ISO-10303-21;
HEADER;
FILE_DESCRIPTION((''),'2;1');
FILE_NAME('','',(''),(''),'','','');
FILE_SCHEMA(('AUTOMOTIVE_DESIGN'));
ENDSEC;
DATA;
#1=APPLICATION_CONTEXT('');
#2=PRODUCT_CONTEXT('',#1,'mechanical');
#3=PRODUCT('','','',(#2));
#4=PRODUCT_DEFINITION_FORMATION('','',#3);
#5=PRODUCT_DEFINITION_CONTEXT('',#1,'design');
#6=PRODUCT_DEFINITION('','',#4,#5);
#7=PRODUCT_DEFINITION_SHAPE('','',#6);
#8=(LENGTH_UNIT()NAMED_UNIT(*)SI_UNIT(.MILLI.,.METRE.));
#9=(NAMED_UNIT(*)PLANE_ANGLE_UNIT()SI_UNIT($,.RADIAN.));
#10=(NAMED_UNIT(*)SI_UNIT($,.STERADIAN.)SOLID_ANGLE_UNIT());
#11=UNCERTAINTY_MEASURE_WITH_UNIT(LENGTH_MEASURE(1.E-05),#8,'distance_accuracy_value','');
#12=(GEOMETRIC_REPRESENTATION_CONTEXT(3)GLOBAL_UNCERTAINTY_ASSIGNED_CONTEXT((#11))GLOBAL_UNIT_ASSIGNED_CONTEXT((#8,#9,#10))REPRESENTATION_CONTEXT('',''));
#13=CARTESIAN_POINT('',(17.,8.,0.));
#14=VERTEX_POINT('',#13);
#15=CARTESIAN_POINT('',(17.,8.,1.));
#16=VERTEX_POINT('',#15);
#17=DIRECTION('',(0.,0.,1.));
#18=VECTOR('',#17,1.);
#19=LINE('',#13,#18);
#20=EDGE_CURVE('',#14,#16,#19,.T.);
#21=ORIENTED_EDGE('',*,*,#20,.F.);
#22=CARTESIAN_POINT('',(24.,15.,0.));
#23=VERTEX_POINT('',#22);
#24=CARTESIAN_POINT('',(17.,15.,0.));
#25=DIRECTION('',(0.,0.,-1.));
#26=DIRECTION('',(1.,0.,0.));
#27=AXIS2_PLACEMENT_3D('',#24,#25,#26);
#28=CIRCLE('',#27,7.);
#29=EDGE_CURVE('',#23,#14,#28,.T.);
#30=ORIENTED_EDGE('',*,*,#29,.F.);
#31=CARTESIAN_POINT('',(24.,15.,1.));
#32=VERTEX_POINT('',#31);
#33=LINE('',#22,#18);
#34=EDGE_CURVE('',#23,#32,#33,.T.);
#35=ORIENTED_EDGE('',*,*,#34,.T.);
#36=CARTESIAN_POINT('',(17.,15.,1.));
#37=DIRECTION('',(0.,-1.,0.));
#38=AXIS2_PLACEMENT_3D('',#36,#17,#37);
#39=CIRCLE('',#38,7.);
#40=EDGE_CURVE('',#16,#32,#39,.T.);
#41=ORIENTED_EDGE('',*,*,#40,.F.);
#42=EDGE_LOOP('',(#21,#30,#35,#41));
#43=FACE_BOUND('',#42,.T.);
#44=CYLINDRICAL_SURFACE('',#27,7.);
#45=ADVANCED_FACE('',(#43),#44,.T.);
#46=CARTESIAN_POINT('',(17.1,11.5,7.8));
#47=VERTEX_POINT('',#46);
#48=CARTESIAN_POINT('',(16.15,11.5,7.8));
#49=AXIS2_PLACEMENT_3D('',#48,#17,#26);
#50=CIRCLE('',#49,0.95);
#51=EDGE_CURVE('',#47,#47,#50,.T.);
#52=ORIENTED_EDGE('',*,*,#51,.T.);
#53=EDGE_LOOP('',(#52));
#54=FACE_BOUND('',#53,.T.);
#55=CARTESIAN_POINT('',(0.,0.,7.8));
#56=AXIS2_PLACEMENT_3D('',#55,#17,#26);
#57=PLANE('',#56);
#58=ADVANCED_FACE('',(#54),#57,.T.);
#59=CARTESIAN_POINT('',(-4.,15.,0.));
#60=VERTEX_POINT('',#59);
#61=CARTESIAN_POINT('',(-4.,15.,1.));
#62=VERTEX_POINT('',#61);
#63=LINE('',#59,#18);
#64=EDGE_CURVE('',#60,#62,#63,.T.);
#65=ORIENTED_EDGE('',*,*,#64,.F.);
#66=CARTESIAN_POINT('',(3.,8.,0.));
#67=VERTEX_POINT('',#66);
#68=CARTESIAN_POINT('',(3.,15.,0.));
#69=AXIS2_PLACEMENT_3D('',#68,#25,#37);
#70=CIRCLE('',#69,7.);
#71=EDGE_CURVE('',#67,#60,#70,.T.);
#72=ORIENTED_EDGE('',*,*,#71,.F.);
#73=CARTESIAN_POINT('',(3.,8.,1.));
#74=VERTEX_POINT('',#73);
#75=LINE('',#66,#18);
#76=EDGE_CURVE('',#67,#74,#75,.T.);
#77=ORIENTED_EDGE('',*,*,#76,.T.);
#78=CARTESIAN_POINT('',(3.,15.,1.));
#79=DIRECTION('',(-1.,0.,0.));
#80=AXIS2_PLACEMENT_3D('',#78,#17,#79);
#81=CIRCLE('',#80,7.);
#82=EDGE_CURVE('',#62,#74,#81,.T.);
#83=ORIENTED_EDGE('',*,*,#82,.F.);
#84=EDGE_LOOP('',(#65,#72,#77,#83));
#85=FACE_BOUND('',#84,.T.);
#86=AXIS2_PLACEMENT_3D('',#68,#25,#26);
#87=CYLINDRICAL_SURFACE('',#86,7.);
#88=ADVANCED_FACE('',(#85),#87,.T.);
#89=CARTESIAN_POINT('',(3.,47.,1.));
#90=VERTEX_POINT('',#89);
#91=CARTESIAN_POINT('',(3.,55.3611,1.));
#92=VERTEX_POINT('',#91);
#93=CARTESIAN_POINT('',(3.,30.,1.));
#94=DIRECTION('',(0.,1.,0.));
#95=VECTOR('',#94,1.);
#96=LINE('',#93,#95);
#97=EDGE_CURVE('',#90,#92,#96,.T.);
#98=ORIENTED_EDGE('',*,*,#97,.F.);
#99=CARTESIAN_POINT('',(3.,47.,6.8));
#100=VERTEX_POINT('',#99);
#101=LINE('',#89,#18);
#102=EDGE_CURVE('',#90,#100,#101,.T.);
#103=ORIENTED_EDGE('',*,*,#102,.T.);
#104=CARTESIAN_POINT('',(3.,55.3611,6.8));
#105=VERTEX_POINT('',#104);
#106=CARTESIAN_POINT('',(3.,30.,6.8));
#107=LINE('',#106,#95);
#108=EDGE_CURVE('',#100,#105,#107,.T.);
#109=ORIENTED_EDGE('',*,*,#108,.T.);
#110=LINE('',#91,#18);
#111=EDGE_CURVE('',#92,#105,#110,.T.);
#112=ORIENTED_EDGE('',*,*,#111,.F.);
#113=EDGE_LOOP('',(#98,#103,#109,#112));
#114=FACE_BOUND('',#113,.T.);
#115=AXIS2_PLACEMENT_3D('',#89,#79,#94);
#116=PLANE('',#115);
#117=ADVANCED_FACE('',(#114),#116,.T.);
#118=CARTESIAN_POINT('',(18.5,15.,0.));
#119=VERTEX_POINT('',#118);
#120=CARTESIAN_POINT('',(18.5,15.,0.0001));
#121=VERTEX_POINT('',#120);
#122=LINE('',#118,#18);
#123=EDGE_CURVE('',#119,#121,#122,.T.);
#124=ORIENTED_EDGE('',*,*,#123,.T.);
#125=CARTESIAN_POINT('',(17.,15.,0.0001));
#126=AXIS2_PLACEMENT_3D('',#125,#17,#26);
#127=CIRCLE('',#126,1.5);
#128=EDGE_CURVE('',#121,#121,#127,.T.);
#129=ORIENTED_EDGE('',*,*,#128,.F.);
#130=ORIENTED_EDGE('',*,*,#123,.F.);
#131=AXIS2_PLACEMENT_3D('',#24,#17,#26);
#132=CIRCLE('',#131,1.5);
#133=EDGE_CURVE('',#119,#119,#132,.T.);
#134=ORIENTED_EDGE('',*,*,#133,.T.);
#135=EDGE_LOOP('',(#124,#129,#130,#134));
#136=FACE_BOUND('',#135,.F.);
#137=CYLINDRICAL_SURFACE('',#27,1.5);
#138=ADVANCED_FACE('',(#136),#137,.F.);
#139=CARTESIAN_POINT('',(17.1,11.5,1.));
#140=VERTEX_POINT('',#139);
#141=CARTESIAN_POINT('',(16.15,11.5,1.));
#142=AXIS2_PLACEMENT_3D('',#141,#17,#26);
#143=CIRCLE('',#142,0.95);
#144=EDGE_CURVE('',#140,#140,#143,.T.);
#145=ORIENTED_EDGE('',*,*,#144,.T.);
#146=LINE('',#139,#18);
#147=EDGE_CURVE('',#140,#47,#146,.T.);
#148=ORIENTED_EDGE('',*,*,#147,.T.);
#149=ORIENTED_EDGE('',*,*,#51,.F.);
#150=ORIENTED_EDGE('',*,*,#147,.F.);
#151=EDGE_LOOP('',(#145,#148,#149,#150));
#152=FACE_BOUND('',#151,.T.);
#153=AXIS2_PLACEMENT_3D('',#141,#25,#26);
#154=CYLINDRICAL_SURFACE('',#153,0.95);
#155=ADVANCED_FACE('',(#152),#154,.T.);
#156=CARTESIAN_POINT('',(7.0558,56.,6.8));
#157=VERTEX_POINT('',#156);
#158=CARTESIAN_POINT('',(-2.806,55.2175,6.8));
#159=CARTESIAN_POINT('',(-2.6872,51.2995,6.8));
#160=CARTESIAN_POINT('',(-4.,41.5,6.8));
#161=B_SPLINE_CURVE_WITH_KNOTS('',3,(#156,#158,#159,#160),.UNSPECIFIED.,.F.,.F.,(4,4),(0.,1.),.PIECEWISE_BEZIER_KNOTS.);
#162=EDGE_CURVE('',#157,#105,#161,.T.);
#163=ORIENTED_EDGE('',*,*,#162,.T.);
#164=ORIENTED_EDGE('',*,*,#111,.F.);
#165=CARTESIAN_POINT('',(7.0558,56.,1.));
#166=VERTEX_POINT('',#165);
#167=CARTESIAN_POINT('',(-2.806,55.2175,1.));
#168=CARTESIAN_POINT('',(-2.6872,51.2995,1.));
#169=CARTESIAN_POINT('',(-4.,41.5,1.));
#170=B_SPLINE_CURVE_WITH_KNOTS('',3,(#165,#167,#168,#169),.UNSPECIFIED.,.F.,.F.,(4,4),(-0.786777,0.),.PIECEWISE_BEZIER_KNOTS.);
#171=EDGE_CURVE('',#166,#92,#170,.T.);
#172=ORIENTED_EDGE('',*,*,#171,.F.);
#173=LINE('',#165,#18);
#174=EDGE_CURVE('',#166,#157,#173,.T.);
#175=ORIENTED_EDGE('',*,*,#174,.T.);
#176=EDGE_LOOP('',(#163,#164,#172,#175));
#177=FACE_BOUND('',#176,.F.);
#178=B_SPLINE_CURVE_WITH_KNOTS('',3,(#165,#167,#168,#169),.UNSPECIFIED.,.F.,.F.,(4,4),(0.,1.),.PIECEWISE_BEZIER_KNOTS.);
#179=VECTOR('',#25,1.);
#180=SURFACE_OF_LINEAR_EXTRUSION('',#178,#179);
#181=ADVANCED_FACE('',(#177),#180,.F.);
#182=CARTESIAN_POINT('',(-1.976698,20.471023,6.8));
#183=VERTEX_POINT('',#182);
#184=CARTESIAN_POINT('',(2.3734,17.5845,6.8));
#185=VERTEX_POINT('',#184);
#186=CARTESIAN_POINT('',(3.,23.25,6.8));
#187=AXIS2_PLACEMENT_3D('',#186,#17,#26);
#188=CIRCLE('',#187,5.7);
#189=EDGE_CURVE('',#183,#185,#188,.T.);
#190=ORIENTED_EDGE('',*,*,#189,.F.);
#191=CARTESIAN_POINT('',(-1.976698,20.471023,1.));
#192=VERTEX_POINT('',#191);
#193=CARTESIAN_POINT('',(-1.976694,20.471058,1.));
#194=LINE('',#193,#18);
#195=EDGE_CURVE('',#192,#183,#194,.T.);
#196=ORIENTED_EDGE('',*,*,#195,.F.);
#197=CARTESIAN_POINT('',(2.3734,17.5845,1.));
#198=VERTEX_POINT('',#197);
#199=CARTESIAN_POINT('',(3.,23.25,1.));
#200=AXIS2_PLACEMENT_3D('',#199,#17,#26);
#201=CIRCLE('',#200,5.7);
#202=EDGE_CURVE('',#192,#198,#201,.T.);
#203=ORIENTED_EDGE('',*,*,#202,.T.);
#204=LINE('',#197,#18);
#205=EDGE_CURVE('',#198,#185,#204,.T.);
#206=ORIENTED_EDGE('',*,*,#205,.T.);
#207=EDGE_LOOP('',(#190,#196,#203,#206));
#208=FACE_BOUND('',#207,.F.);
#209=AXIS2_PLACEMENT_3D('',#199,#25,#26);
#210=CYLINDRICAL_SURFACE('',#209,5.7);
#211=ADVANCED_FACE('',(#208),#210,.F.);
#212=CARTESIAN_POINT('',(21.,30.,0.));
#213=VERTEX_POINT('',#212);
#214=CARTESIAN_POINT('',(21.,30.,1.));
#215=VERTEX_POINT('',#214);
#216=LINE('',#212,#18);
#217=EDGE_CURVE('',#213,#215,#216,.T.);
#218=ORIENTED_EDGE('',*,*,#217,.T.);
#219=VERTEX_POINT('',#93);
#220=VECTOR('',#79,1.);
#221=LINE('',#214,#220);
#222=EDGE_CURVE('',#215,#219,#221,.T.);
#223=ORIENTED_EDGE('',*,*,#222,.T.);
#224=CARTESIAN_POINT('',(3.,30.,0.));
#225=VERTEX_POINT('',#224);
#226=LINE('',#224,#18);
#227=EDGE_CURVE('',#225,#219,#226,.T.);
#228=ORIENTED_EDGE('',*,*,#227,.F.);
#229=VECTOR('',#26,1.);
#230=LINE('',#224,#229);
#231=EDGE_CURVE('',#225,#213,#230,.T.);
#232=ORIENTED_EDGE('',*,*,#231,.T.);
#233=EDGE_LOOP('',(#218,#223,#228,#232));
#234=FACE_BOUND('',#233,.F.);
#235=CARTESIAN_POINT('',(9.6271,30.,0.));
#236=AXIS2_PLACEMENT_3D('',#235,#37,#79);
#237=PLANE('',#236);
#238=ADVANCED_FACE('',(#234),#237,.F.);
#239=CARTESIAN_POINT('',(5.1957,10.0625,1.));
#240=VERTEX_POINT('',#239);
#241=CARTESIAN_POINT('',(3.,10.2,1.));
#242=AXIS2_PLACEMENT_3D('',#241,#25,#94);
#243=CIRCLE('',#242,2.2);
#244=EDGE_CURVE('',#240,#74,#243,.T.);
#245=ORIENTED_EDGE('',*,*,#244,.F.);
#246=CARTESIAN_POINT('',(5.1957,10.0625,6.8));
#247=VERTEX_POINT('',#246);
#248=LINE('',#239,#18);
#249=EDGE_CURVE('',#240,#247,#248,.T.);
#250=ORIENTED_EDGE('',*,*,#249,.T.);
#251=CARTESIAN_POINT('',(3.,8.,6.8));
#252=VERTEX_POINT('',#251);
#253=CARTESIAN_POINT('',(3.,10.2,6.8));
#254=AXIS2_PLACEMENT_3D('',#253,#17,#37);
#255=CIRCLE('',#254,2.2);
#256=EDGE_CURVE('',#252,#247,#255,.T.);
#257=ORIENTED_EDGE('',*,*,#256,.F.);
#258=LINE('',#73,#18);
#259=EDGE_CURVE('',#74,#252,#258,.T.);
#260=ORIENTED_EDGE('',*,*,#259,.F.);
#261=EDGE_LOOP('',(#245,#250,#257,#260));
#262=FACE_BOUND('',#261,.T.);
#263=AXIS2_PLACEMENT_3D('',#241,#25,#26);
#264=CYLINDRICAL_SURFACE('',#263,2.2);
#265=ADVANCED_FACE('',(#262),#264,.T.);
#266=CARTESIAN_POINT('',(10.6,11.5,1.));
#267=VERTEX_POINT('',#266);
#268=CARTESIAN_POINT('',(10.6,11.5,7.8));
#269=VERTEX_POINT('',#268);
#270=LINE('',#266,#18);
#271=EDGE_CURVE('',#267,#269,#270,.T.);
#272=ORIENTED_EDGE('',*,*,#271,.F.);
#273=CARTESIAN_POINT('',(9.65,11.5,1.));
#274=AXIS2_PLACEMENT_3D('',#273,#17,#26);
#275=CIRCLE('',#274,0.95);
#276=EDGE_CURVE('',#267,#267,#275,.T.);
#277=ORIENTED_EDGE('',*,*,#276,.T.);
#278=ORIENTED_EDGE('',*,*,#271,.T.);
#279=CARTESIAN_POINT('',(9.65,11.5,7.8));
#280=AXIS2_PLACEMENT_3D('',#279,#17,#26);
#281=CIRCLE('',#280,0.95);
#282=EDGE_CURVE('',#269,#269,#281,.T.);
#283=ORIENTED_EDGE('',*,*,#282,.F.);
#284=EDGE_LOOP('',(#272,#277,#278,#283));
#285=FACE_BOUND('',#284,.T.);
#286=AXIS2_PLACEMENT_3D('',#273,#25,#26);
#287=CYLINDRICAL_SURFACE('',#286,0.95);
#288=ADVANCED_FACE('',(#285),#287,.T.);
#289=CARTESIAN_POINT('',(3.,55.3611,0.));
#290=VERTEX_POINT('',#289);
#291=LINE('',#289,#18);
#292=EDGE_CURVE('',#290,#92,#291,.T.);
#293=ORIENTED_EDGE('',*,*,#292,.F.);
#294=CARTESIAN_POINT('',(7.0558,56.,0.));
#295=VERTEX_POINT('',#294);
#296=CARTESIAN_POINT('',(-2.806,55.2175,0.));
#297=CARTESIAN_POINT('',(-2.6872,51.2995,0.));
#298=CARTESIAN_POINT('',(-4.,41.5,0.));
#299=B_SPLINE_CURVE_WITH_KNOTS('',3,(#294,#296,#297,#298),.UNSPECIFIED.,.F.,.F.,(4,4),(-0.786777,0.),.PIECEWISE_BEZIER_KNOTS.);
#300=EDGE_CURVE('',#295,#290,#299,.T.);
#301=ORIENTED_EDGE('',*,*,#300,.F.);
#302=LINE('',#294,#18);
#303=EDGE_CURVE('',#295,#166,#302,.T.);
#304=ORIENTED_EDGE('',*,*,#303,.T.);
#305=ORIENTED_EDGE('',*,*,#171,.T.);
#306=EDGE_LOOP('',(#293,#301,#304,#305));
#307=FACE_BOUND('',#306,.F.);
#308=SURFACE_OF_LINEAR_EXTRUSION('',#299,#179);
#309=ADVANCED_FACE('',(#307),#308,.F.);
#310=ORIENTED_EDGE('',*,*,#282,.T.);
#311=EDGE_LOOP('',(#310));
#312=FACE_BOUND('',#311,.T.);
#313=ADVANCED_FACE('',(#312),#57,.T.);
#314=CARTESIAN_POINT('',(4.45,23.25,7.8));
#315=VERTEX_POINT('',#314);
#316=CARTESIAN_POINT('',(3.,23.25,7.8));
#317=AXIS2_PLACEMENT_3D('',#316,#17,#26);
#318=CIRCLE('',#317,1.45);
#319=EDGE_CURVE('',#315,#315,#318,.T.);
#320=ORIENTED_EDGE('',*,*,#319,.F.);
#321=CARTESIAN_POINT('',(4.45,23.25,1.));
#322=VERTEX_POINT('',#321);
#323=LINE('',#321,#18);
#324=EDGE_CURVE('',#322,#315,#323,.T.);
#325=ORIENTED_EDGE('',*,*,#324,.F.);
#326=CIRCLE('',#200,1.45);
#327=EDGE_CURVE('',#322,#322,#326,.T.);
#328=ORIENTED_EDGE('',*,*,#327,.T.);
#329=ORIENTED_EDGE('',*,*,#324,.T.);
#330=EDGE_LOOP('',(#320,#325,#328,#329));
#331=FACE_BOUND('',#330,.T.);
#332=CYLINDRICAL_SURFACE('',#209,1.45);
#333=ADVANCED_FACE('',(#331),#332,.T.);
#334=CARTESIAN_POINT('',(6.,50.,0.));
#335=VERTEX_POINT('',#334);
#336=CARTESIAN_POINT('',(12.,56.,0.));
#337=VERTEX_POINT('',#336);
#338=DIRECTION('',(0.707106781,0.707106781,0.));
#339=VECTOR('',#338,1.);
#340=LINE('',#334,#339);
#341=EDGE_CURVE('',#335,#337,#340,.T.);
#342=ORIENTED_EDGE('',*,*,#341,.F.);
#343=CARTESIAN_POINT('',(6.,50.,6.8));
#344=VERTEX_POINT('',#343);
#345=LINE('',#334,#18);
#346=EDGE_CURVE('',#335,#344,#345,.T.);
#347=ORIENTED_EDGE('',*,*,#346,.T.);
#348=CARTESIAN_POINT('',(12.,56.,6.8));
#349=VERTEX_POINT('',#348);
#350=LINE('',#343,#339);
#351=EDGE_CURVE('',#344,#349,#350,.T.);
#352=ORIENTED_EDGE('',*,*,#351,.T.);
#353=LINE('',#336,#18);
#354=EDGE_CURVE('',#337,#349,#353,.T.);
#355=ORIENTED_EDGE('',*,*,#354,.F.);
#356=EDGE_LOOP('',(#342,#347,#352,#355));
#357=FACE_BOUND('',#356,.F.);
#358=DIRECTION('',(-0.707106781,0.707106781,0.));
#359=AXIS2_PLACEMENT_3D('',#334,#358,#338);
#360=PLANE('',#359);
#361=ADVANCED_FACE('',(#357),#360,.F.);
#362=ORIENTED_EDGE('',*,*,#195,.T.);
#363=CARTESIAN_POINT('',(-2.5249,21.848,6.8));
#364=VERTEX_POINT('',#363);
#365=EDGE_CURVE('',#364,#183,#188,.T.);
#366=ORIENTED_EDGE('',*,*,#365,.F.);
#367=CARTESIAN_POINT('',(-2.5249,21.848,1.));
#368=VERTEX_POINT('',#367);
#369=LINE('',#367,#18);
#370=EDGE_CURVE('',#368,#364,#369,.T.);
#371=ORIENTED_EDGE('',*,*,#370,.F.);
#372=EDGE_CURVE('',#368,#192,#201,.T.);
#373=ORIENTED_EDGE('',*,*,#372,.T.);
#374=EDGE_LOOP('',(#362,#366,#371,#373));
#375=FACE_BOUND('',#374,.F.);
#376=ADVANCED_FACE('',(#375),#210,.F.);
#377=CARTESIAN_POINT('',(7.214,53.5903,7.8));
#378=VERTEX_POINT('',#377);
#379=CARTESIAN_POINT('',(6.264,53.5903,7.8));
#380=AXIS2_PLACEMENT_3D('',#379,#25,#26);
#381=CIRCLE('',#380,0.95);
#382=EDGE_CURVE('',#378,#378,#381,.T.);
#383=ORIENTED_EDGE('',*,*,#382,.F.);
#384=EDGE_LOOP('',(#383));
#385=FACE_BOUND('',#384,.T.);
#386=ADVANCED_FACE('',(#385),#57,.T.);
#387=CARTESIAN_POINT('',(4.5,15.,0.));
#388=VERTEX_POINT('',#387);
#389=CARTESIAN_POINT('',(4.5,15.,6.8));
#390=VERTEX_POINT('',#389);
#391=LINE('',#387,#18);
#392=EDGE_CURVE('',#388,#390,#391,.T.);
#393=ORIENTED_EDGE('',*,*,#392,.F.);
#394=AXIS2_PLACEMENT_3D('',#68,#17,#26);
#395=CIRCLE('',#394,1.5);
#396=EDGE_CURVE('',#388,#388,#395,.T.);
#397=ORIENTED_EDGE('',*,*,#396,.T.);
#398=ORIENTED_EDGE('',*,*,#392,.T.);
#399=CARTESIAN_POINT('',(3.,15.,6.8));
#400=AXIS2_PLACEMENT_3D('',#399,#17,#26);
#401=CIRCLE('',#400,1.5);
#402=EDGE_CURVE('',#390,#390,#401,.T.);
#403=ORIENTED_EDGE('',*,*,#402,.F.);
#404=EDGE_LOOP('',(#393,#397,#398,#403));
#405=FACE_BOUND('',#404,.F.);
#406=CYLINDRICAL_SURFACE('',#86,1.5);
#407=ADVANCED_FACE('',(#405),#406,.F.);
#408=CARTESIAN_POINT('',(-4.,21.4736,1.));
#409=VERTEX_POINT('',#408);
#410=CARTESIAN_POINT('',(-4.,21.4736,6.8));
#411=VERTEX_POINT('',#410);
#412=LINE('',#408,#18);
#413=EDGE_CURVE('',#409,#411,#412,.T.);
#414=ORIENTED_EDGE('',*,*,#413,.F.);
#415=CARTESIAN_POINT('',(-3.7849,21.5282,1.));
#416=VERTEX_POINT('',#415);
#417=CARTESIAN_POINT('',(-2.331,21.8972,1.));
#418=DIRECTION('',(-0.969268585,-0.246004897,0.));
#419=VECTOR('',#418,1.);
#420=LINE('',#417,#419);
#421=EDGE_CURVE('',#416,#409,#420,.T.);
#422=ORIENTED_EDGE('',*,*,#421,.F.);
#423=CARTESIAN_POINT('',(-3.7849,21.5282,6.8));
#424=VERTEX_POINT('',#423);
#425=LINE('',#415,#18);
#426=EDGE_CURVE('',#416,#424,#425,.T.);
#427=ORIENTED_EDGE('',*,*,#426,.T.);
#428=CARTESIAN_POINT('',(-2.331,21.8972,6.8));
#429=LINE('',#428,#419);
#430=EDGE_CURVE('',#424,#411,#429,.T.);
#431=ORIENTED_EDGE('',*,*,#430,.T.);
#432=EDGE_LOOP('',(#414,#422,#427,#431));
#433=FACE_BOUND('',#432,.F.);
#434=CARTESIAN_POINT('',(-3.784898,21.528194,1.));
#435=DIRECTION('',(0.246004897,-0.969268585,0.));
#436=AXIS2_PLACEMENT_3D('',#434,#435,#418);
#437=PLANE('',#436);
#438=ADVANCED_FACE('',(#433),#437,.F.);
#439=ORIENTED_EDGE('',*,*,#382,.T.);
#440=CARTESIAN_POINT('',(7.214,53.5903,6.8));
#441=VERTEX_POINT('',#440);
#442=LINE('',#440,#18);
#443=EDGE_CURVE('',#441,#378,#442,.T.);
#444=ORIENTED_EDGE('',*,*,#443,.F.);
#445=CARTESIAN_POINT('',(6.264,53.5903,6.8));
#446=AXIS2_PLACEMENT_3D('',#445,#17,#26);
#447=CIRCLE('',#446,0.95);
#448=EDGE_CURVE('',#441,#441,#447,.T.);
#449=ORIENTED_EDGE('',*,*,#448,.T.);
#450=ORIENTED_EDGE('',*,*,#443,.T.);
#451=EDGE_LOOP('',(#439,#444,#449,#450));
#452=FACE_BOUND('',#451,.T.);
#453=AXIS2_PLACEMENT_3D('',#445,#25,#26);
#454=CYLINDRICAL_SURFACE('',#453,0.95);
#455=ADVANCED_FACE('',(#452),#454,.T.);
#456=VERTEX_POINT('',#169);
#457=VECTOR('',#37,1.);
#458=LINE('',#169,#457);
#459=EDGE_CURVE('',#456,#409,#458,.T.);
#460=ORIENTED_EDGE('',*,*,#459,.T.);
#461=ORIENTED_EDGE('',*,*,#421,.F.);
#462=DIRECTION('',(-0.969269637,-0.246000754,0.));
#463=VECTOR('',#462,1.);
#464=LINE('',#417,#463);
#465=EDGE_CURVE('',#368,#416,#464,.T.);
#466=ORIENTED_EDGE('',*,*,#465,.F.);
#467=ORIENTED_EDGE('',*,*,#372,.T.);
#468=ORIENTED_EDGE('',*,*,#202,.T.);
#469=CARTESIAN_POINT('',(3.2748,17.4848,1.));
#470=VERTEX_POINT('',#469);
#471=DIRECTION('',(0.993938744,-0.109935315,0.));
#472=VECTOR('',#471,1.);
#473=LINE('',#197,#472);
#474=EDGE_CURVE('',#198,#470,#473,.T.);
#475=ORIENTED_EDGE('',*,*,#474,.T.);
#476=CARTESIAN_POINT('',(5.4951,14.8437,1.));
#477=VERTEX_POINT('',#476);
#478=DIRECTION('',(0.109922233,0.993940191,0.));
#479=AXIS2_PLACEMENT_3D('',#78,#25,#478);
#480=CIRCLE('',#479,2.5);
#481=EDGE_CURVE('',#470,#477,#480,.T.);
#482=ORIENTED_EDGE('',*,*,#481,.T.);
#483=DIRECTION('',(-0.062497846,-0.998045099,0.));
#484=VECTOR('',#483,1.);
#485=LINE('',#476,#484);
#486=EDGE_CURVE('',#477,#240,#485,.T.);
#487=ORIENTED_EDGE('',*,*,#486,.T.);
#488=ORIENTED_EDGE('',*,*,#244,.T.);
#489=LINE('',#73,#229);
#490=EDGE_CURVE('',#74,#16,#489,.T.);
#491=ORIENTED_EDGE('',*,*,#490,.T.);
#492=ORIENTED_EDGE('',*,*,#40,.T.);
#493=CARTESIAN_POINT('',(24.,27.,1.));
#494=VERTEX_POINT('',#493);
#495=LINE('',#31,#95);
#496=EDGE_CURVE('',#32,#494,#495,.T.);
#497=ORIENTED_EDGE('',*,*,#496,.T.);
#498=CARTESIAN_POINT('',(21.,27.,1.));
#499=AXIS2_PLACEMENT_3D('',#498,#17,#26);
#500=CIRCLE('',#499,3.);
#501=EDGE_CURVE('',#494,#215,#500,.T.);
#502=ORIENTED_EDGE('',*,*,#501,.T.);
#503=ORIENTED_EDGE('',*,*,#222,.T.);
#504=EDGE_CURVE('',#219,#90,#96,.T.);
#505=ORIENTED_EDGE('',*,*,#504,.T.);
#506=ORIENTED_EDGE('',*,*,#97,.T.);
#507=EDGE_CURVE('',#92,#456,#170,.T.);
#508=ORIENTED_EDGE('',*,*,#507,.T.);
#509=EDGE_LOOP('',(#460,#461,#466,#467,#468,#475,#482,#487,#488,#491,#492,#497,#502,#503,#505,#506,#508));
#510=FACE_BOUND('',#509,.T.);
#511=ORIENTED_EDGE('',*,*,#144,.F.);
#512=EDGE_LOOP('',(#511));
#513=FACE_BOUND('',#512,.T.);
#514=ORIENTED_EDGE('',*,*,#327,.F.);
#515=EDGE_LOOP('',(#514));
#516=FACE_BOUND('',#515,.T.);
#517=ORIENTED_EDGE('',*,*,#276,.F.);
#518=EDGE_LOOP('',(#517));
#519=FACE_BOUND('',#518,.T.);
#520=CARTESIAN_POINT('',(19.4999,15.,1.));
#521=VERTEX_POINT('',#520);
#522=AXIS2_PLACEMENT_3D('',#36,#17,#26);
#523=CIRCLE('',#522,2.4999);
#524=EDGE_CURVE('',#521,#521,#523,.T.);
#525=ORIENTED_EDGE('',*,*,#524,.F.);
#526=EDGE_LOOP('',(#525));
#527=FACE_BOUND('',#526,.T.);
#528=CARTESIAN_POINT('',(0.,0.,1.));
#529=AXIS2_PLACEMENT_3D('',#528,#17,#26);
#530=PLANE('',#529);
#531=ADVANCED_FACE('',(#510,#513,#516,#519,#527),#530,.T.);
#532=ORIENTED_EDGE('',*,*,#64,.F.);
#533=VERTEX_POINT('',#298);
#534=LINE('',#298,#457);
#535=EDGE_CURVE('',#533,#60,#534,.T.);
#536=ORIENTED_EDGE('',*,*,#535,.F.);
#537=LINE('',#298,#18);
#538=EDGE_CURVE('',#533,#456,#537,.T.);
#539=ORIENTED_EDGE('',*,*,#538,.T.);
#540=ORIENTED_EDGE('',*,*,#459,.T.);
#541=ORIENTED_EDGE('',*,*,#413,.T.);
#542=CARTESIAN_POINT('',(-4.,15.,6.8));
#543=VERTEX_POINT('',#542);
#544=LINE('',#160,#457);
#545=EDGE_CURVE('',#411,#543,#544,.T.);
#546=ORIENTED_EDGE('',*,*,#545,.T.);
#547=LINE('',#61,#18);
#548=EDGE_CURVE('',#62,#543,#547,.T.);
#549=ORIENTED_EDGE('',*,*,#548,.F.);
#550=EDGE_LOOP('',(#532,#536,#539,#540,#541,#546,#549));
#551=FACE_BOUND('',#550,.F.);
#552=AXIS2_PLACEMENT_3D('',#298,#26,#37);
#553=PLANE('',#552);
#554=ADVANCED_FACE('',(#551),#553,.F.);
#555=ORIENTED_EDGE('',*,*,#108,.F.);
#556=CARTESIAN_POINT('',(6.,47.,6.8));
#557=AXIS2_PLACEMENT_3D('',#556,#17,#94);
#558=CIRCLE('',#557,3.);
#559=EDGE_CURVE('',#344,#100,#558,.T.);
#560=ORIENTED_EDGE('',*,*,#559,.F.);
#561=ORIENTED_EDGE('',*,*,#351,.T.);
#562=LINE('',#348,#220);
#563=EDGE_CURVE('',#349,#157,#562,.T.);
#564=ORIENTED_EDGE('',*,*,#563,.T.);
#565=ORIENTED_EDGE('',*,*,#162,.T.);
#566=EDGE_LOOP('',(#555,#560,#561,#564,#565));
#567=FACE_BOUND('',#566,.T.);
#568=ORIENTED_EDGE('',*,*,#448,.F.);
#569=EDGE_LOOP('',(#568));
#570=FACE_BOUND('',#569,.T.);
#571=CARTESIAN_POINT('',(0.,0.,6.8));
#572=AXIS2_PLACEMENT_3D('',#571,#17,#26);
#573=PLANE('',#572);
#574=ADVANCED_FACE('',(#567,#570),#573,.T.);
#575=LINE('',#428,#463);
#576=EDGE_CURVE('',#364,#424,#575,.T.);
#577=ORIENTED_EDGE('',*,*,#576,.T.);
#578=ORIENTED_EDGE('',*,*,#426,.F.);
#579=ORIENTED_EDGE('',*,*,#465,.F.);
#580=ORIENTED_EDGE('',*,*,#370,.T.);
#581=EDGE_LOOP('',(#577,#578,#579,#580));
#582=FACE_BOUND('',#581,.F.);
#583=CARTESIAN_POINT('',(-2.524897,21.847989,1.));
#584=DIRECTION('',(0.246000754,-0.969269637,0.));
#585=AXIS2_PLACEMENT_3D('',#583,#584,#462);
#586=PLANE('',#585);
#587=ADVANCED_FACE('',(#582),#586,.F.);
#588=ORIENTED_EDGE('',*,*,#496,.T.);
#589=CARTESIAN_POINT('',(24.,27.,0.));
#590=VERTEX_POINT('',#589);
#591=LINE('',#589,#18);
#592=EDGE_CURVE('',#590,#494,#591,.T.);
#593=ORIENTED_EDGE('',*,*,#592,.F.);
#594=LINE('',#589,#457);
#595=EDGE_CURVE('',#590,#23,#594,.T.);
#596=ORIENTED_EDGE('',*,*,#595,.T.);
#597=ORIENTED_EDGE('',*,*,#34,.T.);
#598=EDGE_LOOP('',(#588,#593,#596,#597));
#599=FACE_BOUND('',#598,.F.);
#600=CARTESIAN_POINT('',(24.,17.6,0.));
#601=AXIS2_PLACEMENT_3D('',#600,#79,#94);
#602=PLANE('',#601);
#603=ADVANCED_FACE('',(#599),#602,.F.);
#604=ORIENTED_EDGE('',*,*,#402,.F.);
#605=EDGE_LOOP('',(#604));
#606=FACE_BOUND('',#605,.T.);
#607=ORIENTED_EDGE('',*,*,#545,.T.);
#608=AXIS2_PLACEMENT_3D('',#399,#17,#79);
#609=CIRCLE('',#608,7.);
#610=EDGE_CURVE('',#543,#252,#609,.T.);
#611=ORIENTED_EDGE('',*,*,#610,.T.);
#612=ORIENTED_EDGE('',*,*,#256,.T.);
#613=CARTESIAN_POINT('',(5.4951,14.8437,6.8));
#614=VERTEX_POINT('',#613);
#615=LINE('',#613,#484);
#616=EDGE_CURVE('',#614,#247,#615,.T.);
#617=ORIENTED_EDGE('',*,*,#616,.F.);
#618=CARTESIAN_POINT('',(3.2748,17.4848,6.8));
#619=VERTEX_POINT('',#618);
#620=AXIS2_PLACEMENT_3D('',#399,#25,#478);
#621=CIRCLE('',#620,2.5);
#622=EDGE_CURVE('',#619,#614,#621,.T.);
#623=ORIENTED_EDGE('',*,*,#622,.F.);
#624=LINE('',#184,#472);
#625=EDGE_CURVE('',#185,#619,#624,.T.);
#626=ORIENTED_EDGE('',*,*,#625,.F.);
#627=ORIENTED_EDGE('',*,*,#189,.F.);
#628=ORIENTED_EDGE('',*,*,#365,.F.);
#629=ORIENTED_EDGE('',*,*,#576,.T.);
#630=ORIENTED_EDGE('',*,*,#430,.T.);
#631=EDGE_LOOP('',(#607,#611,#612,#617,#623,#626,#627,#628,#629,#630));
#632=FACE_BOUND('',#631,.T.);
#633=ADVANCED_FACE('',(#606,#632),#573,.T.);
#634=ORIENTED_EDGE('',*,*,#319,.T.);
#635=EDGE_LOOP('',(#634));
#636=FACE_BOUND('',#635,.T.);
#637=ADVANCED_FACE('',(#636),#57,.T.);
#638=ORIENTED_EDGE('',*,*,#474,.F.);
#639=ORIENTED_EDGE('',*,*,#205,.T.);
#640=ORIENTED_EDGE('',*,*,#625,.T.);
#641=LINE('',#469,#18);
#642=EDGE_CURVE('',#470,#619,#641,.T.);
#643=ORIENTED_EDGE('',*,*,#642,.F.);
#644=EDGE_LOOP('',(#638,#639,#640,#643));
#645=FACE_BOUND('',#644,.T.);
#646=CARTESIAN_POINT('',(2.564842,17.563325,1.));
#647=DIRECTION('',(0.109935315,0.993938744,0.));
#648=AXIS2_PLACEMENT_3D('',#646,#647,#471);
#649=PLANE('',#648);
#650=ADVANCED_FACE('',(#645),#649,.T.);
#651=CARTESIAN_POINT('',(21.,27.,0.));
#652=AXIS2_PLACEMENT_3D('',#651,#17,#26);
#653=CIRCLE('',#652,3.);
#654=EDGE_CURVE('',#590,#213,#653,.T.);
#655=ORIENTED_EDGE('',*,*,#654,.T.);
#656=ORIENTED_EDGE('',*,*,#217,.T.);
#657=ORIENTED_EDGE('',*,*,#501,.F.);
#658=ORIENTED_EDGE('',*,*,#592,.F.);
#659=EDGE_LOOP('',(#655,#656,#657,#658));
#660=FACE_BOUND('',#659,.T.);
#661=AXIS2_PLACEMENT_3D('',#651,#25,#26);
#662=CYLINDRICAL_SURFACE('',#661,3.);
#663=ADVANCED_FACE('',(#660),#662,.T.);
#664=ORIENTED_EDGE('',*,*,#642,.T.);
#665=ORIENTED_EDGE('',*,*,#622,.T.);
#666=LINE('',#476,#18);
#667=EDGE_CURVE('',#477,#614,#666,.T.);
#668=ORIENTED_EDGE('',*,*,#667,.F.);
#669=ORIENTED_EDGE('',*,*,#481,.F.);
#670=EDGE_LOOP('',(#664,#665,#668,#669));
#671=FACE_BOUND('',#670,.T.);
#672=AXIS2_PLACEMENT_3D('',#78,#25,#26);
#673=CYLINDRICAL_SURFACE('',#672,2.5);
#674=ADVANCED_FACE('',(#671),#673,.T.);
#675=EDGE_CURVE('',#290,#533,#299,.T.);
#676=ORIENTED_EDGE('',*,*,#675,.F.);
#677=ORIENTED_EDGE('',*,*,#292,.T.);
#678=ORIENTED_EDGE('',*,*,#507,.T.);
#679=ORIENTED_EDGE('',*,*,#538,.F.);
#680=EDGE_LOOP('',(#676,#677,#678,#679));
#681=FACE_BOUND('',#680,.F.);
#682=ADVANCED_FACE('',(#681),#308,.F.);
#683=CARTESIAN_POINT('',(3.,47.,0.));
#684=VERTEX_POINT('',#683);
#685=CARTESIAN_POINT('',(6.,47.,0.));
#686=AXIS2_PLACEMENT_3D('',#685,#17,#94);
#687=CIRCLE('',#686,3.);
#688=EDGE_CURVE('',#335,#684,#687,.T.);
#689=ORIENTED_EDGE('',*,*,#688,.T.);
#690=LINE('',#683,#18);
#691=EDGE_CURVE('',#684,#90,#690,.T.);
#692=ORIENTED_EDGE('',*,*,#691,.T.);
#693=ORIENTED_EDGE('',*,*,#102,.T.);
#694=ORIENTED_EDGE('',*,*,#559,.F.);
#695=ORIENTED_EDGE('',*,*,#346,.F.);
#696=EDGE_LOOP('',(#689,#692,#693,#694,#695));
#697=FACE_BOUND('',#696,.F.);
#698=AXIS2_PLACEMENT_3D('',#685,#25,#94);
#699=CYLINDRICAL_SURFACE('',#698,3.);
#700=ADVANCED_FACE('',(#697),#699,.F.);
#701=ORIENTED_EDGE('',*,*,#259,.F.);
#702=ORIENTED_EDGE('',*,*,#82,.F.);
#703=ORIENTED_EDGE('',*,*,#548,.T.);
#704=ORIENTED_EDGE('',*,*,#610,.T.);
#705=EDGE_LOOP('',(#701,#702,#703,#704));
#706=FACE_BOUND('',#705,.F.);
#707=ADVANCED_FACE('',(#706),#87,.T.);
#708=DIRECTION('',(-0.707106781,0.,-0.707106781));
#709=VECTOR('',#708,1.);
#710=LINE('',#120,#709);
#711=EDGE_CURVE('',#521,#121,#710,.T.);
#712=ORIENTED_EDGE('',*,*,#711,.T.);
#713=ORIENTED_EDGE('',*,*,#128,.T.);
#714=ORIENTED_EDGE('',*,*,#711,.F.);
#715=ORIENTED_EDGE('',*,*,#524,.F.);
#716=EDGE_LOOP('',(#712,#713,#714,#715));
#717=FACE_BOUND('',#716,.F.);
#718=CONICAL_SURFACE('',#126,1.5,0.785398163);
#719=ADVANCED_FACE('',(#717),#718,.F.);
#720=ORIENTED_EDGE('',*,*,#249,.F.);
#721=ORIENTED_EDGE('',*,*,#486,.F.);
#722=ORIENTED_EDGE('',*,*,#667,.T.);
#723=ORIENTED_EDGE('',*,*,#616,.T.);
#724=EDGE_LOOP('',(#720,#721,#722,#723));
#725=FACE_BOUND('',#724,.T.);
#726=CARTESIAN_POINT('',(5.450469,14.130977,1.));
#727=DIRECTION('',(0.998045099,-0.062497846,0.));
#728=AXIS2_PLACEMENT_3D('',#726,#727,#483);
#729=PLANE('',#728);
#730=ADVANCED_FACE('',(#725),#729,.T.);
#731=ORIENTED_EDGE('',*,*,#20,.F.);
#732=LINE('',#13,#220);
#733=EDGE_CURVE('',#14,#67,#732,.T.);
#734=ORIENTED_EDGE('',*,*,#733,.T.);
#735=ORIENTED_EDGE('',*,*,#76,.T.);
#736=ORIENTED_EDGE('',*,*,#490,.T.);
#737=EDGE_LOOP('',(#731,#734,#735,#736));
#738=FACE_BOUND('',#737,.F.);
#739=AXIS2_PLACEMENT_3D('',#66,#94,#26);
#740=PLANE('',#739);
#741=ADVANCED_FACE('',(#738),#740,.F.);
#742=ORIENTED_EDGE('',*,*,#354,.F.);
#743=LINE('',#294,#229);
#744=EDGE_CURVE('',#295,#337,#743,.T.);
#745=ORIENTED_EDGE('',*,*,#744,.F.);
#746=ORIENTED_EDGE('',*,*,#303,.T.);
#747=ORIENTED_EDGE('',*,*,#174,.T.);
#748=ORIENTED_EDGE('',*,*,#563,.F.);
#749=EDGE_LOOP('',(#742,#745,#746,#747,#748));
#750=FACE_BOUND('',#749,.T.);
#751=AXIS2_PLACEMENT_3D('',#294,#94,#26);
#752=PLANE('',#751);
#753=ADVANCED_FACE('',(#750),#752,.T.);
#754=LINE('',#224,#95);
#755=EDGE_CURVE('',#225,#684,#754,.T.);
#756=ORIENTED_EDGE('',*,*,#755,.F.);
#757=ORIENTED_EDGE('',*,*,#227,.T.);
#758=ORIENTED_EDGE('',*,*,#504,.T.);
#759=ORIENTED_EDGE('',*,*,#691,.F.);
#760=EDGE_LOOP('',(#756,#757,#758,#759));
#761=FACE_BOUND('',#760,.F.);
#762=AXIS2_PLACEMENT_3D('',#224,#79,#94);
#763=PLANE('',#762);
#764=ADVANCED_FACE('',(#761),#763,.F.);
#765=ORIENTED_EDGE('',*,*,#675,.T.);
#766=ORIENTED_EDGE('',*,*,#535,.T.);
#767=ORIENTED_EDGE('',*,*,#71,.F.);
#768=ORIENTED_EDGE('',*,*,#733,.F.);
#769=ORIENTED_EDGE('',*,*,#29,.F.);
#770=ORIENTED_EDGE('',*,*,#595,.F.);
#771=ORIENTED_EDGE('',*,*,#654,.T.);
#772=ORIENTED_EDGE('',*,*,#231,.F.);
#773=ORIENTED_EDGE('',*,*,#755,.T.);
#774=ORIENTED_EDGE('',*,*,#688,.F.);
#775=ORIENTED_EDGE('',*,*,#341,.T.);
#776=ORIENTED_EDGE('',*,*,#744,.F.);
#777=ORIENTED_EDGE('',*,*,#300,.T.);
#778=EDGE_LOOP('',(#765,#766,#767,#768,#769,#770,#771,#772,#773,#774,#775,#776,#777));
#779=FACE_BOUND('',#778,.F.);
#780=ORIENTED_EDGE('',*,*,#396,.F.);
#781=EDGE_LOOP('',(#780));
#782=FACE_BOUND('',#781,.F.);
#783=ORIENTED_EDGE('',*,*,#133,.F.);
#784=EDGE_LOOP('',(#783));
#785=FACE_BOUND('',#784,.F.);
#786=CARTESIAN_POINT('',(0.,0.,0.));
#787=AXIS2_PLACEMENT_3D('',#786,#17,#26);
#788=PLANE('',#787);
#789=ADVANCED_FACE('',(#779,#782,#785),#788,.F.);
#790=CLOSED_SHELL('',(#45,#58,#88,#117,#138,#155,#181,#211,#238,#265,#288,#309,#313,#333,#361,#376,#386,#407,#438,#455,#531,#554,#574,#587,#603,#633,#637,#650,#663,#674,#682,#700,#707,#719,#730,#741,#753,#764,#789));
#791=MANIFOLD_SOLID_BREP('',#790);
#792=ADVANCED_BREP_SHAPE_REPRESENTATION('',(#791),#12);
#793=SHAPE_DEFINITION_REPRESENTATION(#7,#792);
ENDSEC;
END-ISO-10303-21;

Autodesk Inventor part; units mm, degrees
sketch "Эскиз1" plane through (0, 0, 0) normal (0, 0, 1) x (1, 0, 0)
  line L0 (177.53, 10) -> (177.53, -9.022) projected
  line L1 (177.53, -9.022) -> (165.53, -9.022) projected
  line L2 (165.53, -9.022) -> (165.53, 10) projected
  line L3 (165.53, 10) -> (177.53, 10) projected
  line L4 (165.53, -76) -> (165.53, -56.978) projected
  line L5 (165.53, -56.978) -> (177.53, -56.978) projected
  line L6 (177.53, -56.978) -> (177.53, -76) projected
  line L7 (177.53, -76) -> (165.53, -76) projected
  circle A0 centre (170.53, -49.23) radius 1.6 projected
  circle A1 centre (170.53, -16.77) radius 1.6 projected
  line L8 (181.53, -107.5) -> (181.53, 41.5) projected
  spline S0 degree 3 poles (170.4742, 56) (180.336, 55.2175) (180.2172, 51.2995) (181.53, 41.5) knots -0.786777 -0.786777 -0.786777 -0.786777 0 0 0 0 projected
  line L9 (7.0558, 56) -> (170.4742, 56) projected
  spline S1 degree 3 poles (7.0558, 56) (-2.806, 55.2175) (-2.6872, 51.2995) (-4, 41.5) knots -0.786777 -0.786777 -0.786777 -0.786777 0 0 0 0 projected
  line L10 (-4, 41.5) -> (-4, -107.5) projected
  spline S2 degree 3 poles (7.0558, -122) (-2.806, -121.2175) (-2.6872, -117.2995) (-4, -107.5) knots -0.786777 -0.786777 -0.786777 -0.786777 0 0 0 0 projected
  line L11 (170.4742, -122) -> (7.0558, -122) projected
  spline S3 degree 3 poles (170.4742, -122) (180.336, -121.2175) (180.2172, -117.2995) (181.53, -107.5) knots -0.786777 -0.786777 -0.786777 -0.786777 0 0 0 0 projected
  arc A2 (153.53, -93) -> (156.53, -96) centre (156.53, -93) ccw projected
  line L12 (156.53, -96) -> (174.53, -96) projected
  line L13 (174.53, -96) -> (174.53, -113) projected
  arc A3 (171.53, -116) -> (174.53, -113) centre (171.53, -113) ccw projected
  line L14 (171.53, -116) -> (6, -116) projected
  arc A4 (3, -113) -> (6, -116) centre (6, -113) ccw projected
  line L15 (3, -113) -> (3, -96) projected
  line L16 (3, -96) -> (21, -96) projected
  arc A5 (21, -96) -> (24, -93) centre (21, -93) ccw projected
  line L17 (24, -93) -> (24, 27) projected
  arc A6 (24, 27) -> (21, 30) centre (21, 27) ccw projected
  line L18 (21, 30) -> (3, 30) projected
  line L19 (3, 30) -> (3, 47) projected
  arc A7 (6, 50) -> (3, 47) centre (6, 47) ccw projected
  line L20 (6, 50) -> (171.53, 50) projected
  arc A8 (174.53, 47) -> (171.53, 50) centre (171.53, 47) ccw projected
  line L21 (174.53, 30) -> (174.53, 47) projected
  line L22 (174.53, 30) -> (156.53, 30) projected
  arc A9 (156.53, 30) -> (153.53, 27) centre (156.53, 27) ccw projected
  line L23 (153.53, 27) -> (153.53, -93) projected
  circle A10 centre (160.53, -81) radius 1.5 projected
  circle A11 centre (17, -81) radius 1.5 projected
  circle A12 centre (17, -51) radius 1.5 projected
  circle A13 centre (160.53, -51) radius 1.5 projected
  circle A14 centre (3, -81) radius 1.5 projected
  circle A15 centre (3, -51) radius 1.5 projected
  circle A16 centre (174.53, -81) radius 1.5 projected
  circle A17 centre (17, 15) radius 1.5 projected
  circle A18 centre (17, -15) radius 1.5 projected
  circle A19 centre (160.53, -15) radius 1.5 projected
  circle A20 centre (160.53, 15) radius 1.5 projected
  circle A21 centre (3, 15) radius 1.5 projected
  circle A22 centre (174.53, 15) radius 1.5 projected
  circle A23 centre (3, -15) radius 1.5 projected
  arc A24 (56.8183, -29.5099) -> (58.485, -27.5378) centre (56.485, -27.5378) ccw projected
  line L24 (58.485, -27.5378) -> (58.485, 14) projected
  arc A25 (61.485, 17) -> (58.485, 14) centre (61.485, 14) ccw projected
  line L25 (61.485, 17) -> (61.97, 17) projected
  arc A26 (61.97, 17) -> (64.97, 20) centre (61.97, 20) ccw projected
  line L26 (64.97, 27) -> (64.97, 20) projected
  arc A27 (64.97, 27) -> (61.97, 30) centre (61.97, 27) ccw projected
  line L27 (9.6271, 30) -> (61.97, 30) projected
  arc A28 (9.6271, 30) -> (-1.03, 20.7602) centre (9.8286, 19.0018) ccw projected
  line L28 (-1.03, 20.7602) -> (-1.03, 11.499) projected
  arc A29 (-1.03, 11.499) -> (0.1129, 8.6996) centre (2.97, 11.499) ccw projected
  arc A30 (0.97, 6.6) -> (0.1129, 8.6996) centre (-2.03, 6.6) ccw projected
  line L29 (0.97, 6.6) -> (0.97, -72.6) projected
  arc A31 (0.1129, -74.6996) -> (0.97, -72.6) centre (-2.03, -72.6) ccw projected
  arc A32 (0.1129, -74.6996) -> (-1.03, -77.499) centre (2.97, -77.499) ccw projected
  line L30 (-1.03, -77.499) -> (-1.03, -86.7602) projected
  arc A33 (-1.03, -86.7602) -> (9.6271, -96) centre (9.8286, -85.0018) ccw projected
  line L31 (61.97, -96) -> (9.6271, -96) projected
  arc A34 (61.97, -96) -> (64.97, -93) centre (61.97, -93) ccw projected
  line L32 (64.97, -86) -> (64.97, -93) projected
  arc A35 (64.97, -86) -> (61.97, -83) centre (61.97, -86) ccw projected
  line L33 (61.97, -83) -> (61.485, -83) projected
  arc A36 (58.485, -80) -> (61.485, -83) centre (61.485, -80) ccw projected
  line L34 (58.485, -80) -> (58.485, -48.5022) projected
  arc A37 (58.485, -48.5022) -> (56.8183, -46.5301) centre (56.485, -48.5022) ccw projected
  arc A38 (53.485, -45.3303) -> (56.8183, -46.5301) centre (58.485, -36.67) ccw projected
  arc A39 (52.485, -43.5982) -> (53.485, -45.3303) centre (54.485, -43.5982) ccw projected
  line L35 (52.485, -43.5982) -> (52.485, -32.4418) projected
  arc A40 (53.485, -30.7097) -> (52.485, -32.4418) centre (54.485, -32.4418) ccw projected
  arc A41 (56.8183, -29.5099) -> (53.485, -30.7097) centre (58.485, -39.37) ccw projected
  circle A42 centre (3, -81) radius 1.5 projected
  circle A43 centre (3, 15) radius 1.5 projected
  circle A44 centre (58.485, -89.515) radius 1.5 projected
  circle A45 centre (17, -51) radius 1.5 projected
  circle A46 centre (17, -15) radius 1.5 projected
  circle A47 centre (58.485, 23.515) radius 1.5 projected
  circle A48 centre (49.485, 22.73) radius 0.325 projected
  circle A49 centre (48.885, -25.77) radius 0.8 projected
  circle A50 centre (49.385, -32.52) radius 0.5 projected
  circle A51 centre (4.27, -36.27) radius 0.325 projected
  circle A52 centre (28.2, -73.38) radius 0.325 projected
  circle A53 centre (12.77, 15) radius 0.325 projected
  circle A54 centre (55.185, -49.79) radius 0.325 projected
  circle A55 centre (55.185, -4.51) radius 0.325 projected
  circle A56 centre (12.77, 22) radius 0.325 projected
  circle A57 centre (12.77, -88) radius 0.325 projected
  circle A58 centre (4.27, -23.42) radius 0.325 projected
  circle A59 centre (39.385, -40.52) radius 0.85 projected
  circle A60 centre (53.885, -25.77) radius 0.8 projected
  circle A61 centre (8.77, -88) radius 0.325 projected
  circle A62 centre (39.385, -35.52) radius 0.85 projected
  circle A63 centre (28.2, -60.76) radius 0.325 projected
  circle A64 centre (4.27, -47) radius 0.325 projected
  circle A65 centre (45.215, -90) radius 0.325 projected
  circle A66 centre (43.485, 24.73) radius 0.5 projected
  circle A67 centre (55.185, -69.03) radius 0.325 projected
  circle A68 centre (55.185, 15.73) radius 0.325 projected
  circle A69 centre (45.215, -83) radius 0.325 projected
  circle A70 centre (12.77, -81) radius 0.325 projected
  circle A71 centre (4.27, -8.84) radius 0.325 projected
  circle A72 centre (49.385, -43.52) radius 0.5 projected
  circle A73 centre (8.77, 22) radius 0.325 projected
  line L36 (6, 50) -> (12, 56)
  line L37 (3, 47) -> (3, 55.3611)
  circle A74 centre (3, 15) radius 7
  circle A75 centre (17, 15) radius 7
  line L38 (3, 8) -> (17, 8)
  circle A76 centre (3, 15) radius 2.6
  line L39 (3, 17.6) -> (24, 17.6)
  line L40 (5.6, 15) -> (7.6, 15)
  line L41 (7.6, 15) -> (7.6, 17.6)
  line L42 (7.6, 15) -> (7.6, 8)
  line L43 (7.6, 17.6) -> (20.4, 17.6)
  line L44 (20.4, 17.6) -> (20.4, 7.6)
  line L45 (20.4, 7.6) -> (7.6, 7.6)
  line L46 (7.6, 7.6) -> (7.6, 17.6)
  point P0 (0, 0)
  point P1 (23.4992, 17.6)
  point P2 (-4, 15)
  point P3 (10.5008, 17.6)
  point P4 (10, 15)
  point P5 (9.4992, 17.6)
  point P6 (24, 15)
  dimension "d8" = 5.2
  dimension "d15" = 2
  dimension "d16" = 12.8
  dimension "d17" = 10
extrude "Выдавливание1" add sketch "Эскиз1" along normal blind 1 contours L36 A7 L37 S1 L9 | L10 S1 L37 L19 L18 A28 L28 A74 | A74 L28 A29 A30 | A74 L39 A76 L40 L42 A30 A29 L28 | L28 A28 L18 A6 L17 L39 A75 A74 | L39 A75 A74 | A74 L42 L41 L39 | A74 L42 L38 | A75 L38 L42 A74 | A75 L39 L44 | L41 L40 A76 L39 | A75 L39 | A76 | L39 L17 A75 | A75 L44 L39 | A53 | A56 | A73
chamfer "Фаска1" distance 1 angle 45 1 edges at (15.5, 15, 1)
sketch "Эскиз2" plane through (0, 0, 1) normal (0, 0, 1) x (1, 0, 0)
  circle A0 centre (3, 15) radius 1.5 projected
  line L0 (24, 15) -> (24, 27) projected
  arc A1 (24, 27) -> (21, 30) centre (21, 27) ccw projected
  line L1 (21, 30) -> (3, 30) projected
  line L2 (3, 30) -> (3, 47) projected
  arc A2 (6, 50) -> (3, 47) centre (6, 47) ccw projected
  line L3 (6, 50) -> (12, 56) projected
  line L4 (12, 56) -> (7.0558, 56) projected
  line L5 (-4, 41.5) -> (-4, 15) projected
  arc A3 (-4, 15) -> (3, 8) centre (3, 15) ccw projected
  line L6 (3, 8) -> (17, 8) projected
  arc A4 (17, 8) -> (24, 15) centre (17, 15) ccw projected
  circle A5 centre (17, 15) radius 2.5 projected
  line L7 (3, 30) -> (3, 47) projected
  line L8 (3, 47) -> (3, 55.3611)
  arc A6 (6, 50) -> (3, 47) centre (6, 47) ccw projected
  circle A7 centre (3, 15) radius 1.5 projected
  line L9 (4.5, 15) -> (6.5, 15)
  line L10 (6.5, 15) -> (6.5, 16.5)
  line L11 (6.5, 16.5) -> (3, 16.5)
  line L12 (21, 30) -> (3, 30) projected
  line L13 (3, 16.5) -> (3, 30)
  circle A8 centre (3, 23.25) radius 1.6
  line L14 (6.5, 16.5) -> (19.3, 16.5)
  line L15 (19.3, 16.5) -> (19.3, 6.4)
  line L16 (19.3, 6.4) -> (6.5, 6.4)
  line L17 (6.5, 6.4) -> (6.5, 16.5)
  line L18 (19.3, 16.5) -> (19.3, 10)
  line L19 (19.3, 10) -> (19.3, 11.5)
  line L20 (19.3, 11.5) -> (6.5, 11.5)
  line L21 (12.9, 11.5) -> (16.15, 11.5)
  line L22 (16.15, 11.5) -> (9.65, 11.5)
  circle A9 centre (9.65, 11.5) radius 1
  circle A10 centre (16.15, 11.5) radius 1
  line L23 (19.3, 10) -> (6.5, 10)
  line L24 (9.65, 11.5) -> (18.15, 11.5)
  line L25 (18.172, 17.2) -> (6.5, 16.5)
  line L26 (17.4875, 20.5) -> (6.5, 16.5)
  arc A11 (18.1929, 16.5) -> (17.4875, 20.5) centre (6.5, 16.5) ccw
  line L27 (6.5, 16.5) -> (6.5, 16.7)
  line L28 (8.0036, 17.7621) -> (19.1448, 21.3116)
  circle A12 centre (3, 15) radius 2.6
  circle A13 centre (3, 23.25) radius 5.5
  line L29 (8.0036, 17.7621) -> (5.1102, 17.8522)
  line L30 (2.8349, 17.7525) -> (3.7176, 17.499)
  circle A14 centre (3, 23.25) radius 16.2607
  line L31 (6.5, 16.7) -> (18.172, 17.4)
  line L32 (6.5, 16.7) -> (3.7176, 17.499)
  line L33 (4.1923, 17.8808) -> (5.1102, 17.8522)
  line L34 (17.7935, 30) -> (3, 23.25)
  line L35 (3, 23.25) -> (18.9993, 26.1538)
  line L36 (21, 30) -> (3, 30) projected
  line L37 (18.9993, 26.1538) -> (8.3735, 28.8503)
  line L38 (18.9993, 26.1538) -> (3.8431, 30)
  circle A15 centre (3, 23.25) radius 6.75
  point P0 (0, 0)
  dimension "d41" = 11
  dimension "d23" = 2
  dimension "d24" = 3.2
  dimension "d25" = 12.8
  dimension "d26" = 10.1
  dimension "d27" = 6.5
  dimension "d28" = 1.5
  dimension "d29" = 3.25
  dimension "d30" = 6.5
  dimension "d31" = 2
  dimension "d32" = 2
  dimension "d35" = 8.5
  dimension "d39" = 0.2
  dimension "d40" = 5.2
  dimension "d42" = 16.572
  dimension "d44" = 14.239
  dimension "d45" = 24.526
  dimension "d48" = 24.526
sketch "Эскиз3" plane through (0, 0, 1) normal (0, 0, 1) x (1, 0, 0)
  arc A0 (-2.5, 23.25) -> (3, 17.75) centre (3, 23.25) ccw projected
  line L0 (3, 17.75) -> (3, 17.7051) projected
  line L1 (3, 17.7051) -> (6.5, 16.7) projected
  line L2 (6.5, 16.7) -> (18.172, 17.4) projected
  arc A1 (18.172, 17.4) -> (18.9993, 26.1538) centre (3, 23.25) ccw projected
  line L3 (18.9993, 26.1538) -> (4.6603, 29.7926) projected
  arc A2 (4.6603, 29.7926) -> (3, 30) centre (3, 23.25) ccw projected
  line L4 (3, 30) -> (3, 55.3611) projected
  spline S0 degree 3 poles (3, 55.3611) (-2.8051, 53.7936) (-2.8999, 49.7118) (-4, 41.5) knots -0.659309 -0.659309 -0.659309 -0.659309 0 0 0 0 projected
  line L5 (-4, 41.5) -> (-4, 23.25) projected
  line L6 (-4, 23.25) -> (-2.5, 23.25) projected
  circle A3 centre (3, 23.25) radius 1.6 projected
  line L7 (-2.331, 21.8972) -> (-3.7849, 21.5282)
  line L8 (-4, 41.5) -> (-4, 15) projected
  line L9 (-2.331, 21.8972) -> (-4, 21.4736)
  line L10 (-2.331, 21.8972) -> (-2.5249, 21.848)
  circle A4 centre (3, 23.25) radius 5.7
  circle A5 centre (3, 15) radius 2.6 projected
  line L11 (-2.5249, 21.848) -> (0.5844, 14.0383)
  arc A6 (-4, 15) -> (3, 8) centre (3, 15) ccw projected
  line L12 (3, 12.4) -> (3, 8)
  circle A7 centre (3, 10.2) radius 2.2
  line L13 (3, 30) -> (3, 55.3611) projected
  circle A8 centre (3, 15) radius 1.5 projected
  line L14 (24, 15) -> (24, 27) projected
  arc A9 (24, 27) -> (21, 30) centre (21, 27) ccw projected
  line L15 (21, 30) -> (3, 30) projected
  line L16 (3, 30) -> (3, 47) projected
  arc A10 (6, 50) -> (3, 47) centre (6, 47) ccw projected
  line L17 (6, 50) -> (12, 56) projected
  line L18 (12, 56) -> (7.0558, 56) projected
  spline S1 degree 3 poles (7.0558, 56) (-2.806, 55.2175) (-2.6872, 51.2995) (-4, 41.5) knots 0 0 0 0 1 1 1 1 projected
  line L19 (-4, 41.5) -> (-4, 15) projected
  arc A11 (-4, 15) -> (3, 8) centre (3, 15) ccw projected
  line L20 (3, 8) -> (17, 8) projected
  arc A12 (17, 8) -> (24, 15) centre (17, 15) ccw projected
  circle A13 centre (17, 15) radius 2.5 projected
  point P0 (0, 0)
  point P1 (-1.9767, 20.471)
  point P2 (-2.7, 23.25)
  point P3 (3, 8)
  dimension "d49" = 0.2
extrude "Выдавливание2" add sketch "Эскиз3" along normal blind 5.8 contours A4 L11 A5 A7 A6 L8 L9 L7 | S1 L18 L17 A10 L4 | A7 L12 | L12 A7
ref_plane "РабПлоскость2" through (-3.5074, 8.5, 7.8) normal (0, 0, 1) x (1, 0, 0)
sketch "Эскиз4" plane through (0, 0, 1) normal (0, 0, 1) x (1, 0, 0)
  circle A0 centre (17, 15) radius 2.5 projected
  arc A1 (-2.5249, 21.848) -> (-1.9767, 20.471) centre (3, 23.25) ccw projected
  line L0 (-1.9767, 20.471) -> (0.5844, 14.0383) projected
  arc A2 (0.5844, 14.0383) -> (3, 12.4) centre (3, 15) ccw projected
  arc A3 (3, 8) -> (3, 12.4) centre (3, 10.2) ccw projected
  line L1 (3, 8) -> (17, 8) projected
  arc A4 (17, 8) -> (24, 15) centre (17, 15) ccw projected
  line L2 (24, 15) -> (24, 27) projected
  arc A5 (24, 27) -> (21, 30) centre (21, 27) ccw projected
  line L3 (21, 30) -> (3, 30) projected
  line L4 (3, 30) -> (3, 47) projected
  line L5 (3, 47) -> (3, 55.3611) projected
  line L6 (-4, 41.5) -> (-4, 21.4736) projected
  circle A6 centre (3, 15) radius 1.5 projected
  circle A7 centre (3, 23.25) radius 1.6 projected
  circle A8 centre (3, 23.25) radius 1.6
  line L7 (-4, 21.4736) -> (-2.5249, 21.848) projected
  circle A9 centre (3, 23.25) radius 1.45
  point P0 (0, 0)
  dimension "d58" = 2.9
extrude "Выдавливание3" add sketch "Эскиз4" along normal up to surface (6.8 mm away) contours A9
sketch "Эскиз5" plane through (0, 0, 1) normal (0, 0, 1) x (1, 0, 0)
  circle A0 centre (9.65, 11.5) radius 1 projected
  circle A1 centre (16.15, 11.5) radius 1 projected
  circle A2 centre (9.65, 11.5) radius 0.95
  circle A3 centre (16.15, 11.5) radius 0.95
  point P0 (0, 0)
  dimension "d54" = 1.9
  dimension "d55" = 1.9
ref_plane "РабПлоскость1" through (-3.5074, 8.5, 7.8) normal (0, 0, 1) x (1, 0, 0)
extrude "Выдавливание4" add sketch "Эскиз5" along normal up to surface (6.8 mm away) contours A2 | A3
sketch "Эскиз6" plane through (0, 0, 6.8) normal (0, 0, 1) x (1, 0, 0)
  line L0 (3, 47) -> (3, 55.3611) projected
  line L1 (6, 50) -> (12, 56) projected
  line L2 (3, 51.1805) -> (9.5279, 56)
  line L3 (12, 56) -> (7.0558, 56) projected
  circle A0 centre (6.264, 53.5903) radius 0.95
  point P0 (0, 0)
  dimension "d59" = 1.9
ref_plane "РабПлоскость3" through (-3.5074, 8.5, 7.8) normal (0, 0, 1) x (1, 0, 0)
extrude "Выдавливание5" add sketch "Эскиз6" along normal up to surface (1 mm away)
sketch "Эскиз7" plane through (0, 0, 1) normal (0, 0, 1) x (1, 0, 0)
  circle A0 centre (3, 15) radius 2.6 projected
  circle A1 centre (3, 15) radius 2.5
  line L0 (5.4951, 14.8437) -> (5.1957, 10.0625)
  arc A2 (3, 8) -> (3, 12.4) centre (3, 10.2) ccw projected
  circle A3 centre (3, 23.25) radius 1.45 projected
  arc A4 (-2.5249, 21.848) -> (-1.9767, 20.471) centre (3, 23.25) ccw projected
  circle A5 centre (3, 23.25) radius 5.7
  line L1 (2.3734, 17.5845) -> (3.2748, 17.4848)
  circle A6 centre (9.65, 11.5) radius 0.95 projected
  circle A7 centre (16.15, 11.5) radius 0.95 projected
  circle A8 centre (3, 23.25) radius 1.45 projected
  circle A9 centre (17, 15) radius 2.5 projected
  line L2 (3, 47) -> (3, 55.3611) projected
  line L3 (-4, 41.5) -> (-4, 21.4736) projected
  line L4 (-4, 21.4736) -> (-2.5249, 21.848) projected
  arc A10 (-2.5249, 21.848) -> (-1.9767, 20.471) centre (3, 23.25) ccw projected
  line L5 (-1.9767, 20.471) -> (0.5844, 14.0383) projected
  arc A11 (0.5844, 14.0383) -> (3, 12.4) centre (3, 15) ccw projected
  arc A12 (3, 8) -> (3, 12.4) centre (3, 10.2) ccw projected
  line L6 (3, 8) -> (17, 8) projected
  arc A13 (17, 8) -> (24, 15) centre (17, 15) ccw projected
  line L7 (24, 15) -> (24, 27) projected
  arc A14 (24, 27) -> (21, 30) centre (21, 27) ccw projected
  line L8 (21, 30) -> (3, 30) projected
  line L9 (3, 30) -> (3, 47) projected
  circle A15 centre (3, 15) radius 1.5 projected
  point P0 (0, 0)
  point P1 (-1.9767, 20.471)
  dimension "d62" = 5
extrude "Выдавливание6" add sketch "Эскиз7" along normal up to surface (5.8 mm away) contours A0 L1 A1 L0 | L5 A5 L1 A0 | A0 L0 A2 | A1
properties part number "end carp left"
